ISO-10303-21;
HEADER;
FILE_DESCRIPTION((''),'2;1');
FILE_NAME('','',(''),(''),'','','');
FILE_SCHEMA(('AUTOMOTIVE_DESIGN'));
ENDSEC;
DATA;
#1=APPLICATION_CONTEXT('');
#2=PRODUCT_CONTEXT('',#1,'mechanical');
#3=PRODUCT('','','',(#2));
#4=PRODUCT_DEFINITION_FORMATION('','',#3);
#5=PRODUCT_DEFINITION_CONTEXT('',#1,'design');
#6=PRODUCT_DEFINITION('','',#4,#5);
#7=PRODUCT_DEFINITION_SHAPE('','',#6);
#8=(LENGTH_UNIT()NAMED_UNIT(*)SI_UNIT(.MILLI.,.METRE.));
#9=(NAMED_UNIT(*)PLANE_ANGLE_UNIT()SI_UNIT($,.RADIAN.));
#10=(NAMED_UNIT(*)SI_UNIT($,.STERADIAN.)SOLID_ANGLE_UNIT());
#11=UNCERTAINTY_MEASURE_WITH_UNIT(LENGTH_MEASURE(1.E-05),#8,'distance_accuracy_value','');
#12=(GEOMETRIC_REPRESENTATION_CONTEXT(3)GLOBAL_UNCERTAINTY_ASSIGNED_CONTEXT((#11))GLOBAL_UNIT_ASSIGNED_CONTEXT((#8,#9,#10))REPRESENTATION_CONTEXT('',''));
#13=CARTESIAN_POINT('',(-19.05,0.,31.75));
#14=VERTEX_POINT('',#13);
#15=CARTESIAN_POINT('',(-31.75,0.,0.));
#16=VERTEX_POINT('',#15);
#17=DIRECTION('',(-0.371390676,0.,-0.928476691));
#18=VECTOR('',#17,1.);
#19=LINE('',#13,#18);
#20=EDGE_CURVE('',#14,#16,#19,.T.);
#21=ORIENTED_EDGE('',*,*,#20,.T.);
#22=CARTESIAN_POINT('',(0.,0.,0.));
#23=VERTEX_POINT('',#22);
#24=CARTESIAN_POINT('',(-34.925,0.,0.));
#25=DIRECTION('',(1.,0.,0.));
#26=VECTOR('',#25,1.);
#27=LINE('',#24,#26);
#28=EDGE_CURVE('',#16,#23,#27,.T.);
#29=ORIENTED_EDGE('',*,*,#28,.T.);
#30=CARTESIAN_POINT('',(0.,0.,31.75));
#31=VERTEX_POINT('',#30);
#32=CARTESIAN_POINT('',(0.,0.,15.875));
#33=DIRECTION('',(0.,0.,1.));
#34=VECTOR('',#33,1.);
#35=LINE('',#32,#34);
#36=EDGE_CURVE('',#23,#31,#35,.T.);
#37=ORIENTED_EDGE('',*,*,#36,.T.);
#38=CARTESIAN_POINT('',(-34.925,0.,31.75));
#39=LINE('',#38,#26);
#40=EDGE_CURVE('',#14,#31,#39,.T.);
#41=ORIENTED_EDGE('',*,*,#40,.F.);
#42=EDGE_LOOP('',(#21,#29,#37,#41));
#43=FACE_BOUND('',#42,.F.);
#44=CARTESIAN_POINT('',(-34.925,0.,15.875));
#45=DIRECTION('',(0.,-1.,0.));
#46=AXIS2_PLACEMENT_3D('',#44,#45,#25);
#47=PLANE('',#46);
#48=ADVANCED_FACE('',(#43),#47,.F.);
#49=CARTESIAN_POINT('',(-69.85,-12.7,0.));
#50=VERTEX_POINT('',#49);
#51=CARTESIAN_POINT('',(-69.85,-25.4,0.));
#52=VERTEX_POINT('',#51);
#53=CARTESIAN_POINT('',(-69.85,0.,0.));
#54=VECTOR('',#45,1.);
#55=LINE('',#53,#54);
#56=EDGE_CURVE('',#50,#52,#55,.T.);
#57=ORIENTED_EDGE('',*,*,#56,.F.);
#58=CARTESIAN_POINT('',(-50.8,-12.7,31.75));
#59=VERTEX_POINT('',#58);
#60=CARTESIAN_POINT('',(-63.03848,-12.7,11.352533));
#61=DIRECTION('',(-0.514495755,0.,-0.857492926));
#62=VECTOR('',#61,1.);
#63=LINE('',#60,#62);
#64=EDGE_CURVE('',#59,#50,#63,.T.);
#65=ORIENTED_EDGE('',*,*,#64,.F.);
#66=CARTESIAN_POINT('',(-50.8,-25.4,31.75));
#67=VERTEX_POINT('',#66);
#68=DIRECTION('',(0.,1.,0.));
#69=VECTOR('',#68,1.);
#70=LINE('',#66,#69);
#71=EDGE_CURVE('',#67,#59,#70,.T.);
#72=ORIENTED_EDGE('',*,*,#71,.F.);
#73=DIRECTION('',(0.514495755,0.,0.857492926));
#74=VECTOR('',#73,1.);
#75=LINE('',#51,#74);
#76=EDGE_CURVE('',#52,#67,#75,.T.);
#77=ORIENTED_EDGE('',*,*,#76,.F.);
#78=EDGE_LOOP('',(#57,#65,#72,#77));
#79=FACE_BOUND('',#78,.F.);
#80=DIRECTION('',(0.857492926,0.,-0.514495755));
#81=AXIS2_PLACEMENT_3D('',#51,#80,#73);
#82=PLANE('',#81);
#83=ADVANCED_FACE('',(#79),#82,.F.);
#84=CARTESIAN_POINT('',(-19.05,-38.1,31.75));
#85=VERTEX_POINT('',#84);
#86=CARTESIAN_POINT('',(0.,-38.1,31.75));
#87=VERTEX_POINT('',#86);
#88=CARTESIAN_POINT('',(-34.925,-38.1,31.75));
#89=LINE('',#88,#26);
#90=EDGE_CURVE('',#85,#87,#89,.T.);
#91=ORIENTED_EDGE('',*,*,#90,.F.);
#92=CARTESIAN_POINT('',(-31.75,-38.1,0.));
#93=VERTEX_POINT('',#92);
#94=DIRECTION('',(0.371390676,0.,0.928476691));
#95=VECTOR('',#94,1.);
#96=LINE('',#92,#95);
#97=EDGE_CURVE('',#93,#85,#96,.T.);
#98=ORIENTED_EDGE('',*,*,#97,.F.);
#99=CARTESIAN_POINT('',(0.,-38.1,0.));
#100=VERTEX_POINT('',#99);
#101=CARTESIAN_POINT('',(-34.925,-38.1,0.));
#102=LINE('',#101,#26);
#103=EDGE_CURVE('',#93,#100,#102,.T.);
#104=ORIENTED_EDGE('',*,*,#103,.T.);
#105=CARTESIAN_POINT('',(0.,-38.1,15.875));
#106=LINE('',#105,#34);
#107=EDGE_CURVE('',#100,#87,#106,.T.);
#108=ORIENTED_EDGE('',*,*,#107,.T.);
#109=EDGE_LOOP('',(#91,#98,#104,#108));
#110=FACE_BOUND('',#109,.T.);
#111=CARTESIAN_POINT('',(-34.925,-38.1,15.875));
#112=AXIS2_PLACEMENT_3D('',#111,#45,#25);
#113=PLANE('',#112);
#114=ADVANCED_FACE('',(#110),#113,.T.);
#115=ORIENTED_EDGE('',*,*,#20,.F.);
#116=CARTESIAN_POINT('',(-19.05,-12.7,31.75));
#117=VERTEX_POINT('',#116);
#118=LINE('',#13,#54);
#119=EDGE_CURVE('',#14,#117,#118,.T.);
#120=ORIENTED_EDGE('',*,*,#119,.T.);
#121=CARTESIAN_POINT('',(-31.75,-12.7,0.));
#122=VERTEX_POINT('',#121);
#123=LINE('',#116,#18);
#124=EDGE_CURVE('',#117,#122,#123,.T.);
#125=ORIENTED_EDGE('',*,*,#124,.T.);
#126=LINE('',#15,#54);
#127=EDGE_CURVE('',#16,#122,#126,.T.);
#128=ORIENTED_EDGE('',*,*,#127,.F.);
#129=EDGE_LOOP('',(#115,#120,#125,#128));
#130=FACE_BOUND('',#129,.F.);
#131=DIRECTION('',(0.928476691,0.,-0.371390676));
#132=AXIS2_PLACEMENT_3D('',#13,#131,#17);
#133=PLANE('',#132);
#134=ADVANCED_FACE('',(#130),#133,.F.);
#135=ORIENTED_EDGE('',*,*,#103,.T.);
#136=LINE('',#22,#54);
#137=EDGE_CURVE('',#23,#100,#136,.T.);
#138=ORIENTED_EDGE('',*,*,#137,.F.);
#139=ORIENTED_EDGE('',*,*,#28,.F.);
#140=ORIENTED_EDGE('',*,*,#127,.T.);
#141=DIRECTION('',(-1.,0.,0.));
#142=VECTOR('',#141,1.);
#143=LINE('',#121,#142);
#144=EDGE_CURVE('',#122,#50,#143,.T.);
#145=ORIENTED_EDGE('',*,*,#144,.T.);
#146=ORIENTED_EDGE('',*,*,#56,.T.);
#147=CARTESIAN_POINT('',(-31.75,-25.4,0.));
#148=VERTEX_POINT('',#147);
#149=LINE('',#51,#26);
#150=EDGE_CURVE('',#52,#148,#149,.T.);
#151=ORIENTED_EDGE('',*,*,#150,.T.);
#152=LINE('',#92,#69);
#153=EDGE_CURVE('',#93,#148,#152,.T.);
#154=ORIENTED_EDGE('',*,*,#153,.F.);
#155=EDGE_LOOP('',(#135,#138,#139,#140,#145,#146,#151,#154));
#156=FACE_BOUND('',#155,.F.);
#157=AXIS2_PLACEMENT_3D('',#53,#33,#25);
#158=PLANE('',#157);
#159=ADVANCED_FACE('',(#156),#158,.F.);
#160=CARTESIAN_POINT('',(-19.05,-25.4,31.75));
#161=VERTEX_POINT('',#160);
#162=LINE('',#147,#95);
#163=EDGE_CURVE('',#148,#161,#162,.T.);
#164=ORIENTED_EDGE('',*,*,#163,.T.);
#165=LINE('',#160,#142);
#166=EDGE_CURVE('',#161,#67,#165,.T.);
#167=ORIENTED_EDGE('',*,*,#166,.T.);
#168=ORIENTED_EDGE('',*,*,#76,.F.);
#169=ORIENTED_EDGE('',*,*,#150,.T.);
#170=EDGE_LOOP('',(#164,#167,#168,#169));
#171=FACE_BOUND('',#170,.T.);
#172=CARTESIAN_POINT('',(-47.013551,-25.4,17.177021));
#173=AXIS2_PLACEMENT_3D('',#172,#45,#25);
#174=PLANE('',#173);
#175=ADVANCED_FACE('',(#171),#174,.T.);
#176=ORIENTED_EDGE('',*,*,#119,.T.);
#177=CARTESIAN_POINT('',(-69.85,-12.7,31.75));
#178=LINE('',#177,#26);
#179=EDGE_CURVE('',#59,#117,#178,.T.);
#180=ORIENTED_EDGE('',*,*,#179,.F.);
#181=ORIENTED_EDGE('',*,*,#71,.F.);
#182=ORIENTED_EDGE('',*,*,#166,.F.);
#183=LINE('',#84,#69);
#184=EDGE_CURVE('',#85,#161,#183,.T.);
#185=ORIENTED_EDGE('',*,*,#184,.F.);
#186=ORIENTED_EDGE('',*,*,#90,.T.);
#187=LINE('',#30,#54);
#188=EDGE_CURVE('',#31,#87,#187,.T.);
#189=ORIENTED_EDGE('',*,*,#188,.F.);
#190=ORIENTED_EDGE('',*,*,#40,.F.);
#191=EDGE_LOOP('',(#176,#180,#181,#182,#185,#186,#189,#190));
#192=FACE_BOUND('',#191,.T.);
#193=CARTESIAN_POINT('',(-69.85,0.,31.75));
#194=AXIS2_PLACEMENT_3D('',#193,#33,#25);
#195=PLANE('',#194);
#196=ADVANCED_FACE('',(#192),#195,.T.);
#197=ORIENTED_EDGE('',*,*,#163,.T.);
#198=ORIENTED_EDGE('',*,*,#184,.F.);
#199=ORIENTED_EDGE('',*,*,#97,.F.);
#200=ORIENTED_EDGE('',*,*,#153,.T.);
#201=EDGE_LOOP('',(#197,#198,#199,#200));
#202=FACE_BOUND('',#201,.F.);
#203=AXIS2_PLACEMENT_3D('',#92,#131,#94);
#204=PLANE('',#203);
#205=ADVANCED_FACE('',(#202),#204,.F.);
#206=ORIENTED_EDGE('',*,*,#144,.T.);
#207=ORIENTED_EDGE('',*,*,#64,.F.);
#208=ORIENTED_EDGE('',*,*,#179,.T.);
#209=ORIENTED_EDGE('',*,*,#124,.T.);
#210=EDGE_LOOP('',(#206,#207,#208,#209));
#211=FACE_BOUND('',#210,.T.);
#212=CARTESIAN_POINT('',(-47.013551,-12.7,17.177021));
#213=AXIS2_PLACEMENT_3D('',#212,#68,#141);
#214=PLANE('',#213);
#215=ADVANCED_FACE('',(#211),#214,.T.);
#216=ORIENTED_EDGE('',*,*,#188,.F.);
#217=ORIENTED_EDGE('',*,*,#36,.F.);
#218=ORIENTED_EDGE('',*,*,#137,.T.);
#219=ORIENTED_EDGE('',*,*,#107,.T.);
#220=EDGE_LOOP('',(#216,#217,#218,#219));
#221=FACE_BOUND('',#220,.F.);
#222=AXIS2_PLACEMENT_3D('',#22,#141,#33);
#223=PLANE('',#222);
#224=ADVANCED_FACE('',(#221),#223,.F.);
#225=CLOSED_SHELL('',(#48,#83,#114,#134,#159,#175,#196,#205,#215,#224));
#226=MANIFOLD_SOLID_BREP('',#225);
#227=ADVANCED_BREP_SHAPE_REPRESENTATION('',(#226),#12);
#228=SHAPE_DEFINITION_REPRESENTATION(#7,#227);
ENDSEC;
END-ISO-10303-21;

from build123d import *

# Parameters (mm, degrees)
F0_W     = 69.85
F0_H     = 31.75
F1_DEPTH = 38.1
F3_DEPTH = 12.7
F5_DEPTH = 12.7
F7_DEPTH = 25.401


# Not quite as in the source:
# - a feature names something its author has since deleted; it is built from what else it names


with BuildPart() as f1:
    # F0 (on Front) → F1 (new body)
    with BuildSketch(Plane.XZ):
        with Locations((-34.925, 15.875)):
            Rectangle(F0_W, F0_H)
    extrude(amount=F1_DEPTH)

    # F2 (on face) → F3 (cut)
    with BuildSketch(Plane(origin=(0, 0, 0), x_dir=(-1, 0, 0), z_dir=(0, 1, 0))):
        Polygon((69.85, 31.75), (19.05, 31.75), (31.75, 0), (69.85, 0), align=None)
    extrude(amount=-F3_DEPTH, mode=Mode.SUBTRACT)

    # F4 (on face) → F5 (cut)
    with BuildSketch(Plane.XZ.offset(38.1)):
        Polygon((-31.75, 0), (-19.05, 31.75), (-69.85, 31.75), (-69.85, 0), align=None)
    extrude(amount=-F5_DEPTH, mode=Mode.SUBTRACT)

    # F6 (on face) → F7 (cut, through all)
    with BuildSketch(Plane.XZ.offset(25.4)):
        Polygon((-69.85, 0), (-50.8, 31.75), (-69.85, 31.75), align=None)
    extrude(amount=-F7_DEPTH, mode=Mode.SUBTRACT)


solid = f1.part
